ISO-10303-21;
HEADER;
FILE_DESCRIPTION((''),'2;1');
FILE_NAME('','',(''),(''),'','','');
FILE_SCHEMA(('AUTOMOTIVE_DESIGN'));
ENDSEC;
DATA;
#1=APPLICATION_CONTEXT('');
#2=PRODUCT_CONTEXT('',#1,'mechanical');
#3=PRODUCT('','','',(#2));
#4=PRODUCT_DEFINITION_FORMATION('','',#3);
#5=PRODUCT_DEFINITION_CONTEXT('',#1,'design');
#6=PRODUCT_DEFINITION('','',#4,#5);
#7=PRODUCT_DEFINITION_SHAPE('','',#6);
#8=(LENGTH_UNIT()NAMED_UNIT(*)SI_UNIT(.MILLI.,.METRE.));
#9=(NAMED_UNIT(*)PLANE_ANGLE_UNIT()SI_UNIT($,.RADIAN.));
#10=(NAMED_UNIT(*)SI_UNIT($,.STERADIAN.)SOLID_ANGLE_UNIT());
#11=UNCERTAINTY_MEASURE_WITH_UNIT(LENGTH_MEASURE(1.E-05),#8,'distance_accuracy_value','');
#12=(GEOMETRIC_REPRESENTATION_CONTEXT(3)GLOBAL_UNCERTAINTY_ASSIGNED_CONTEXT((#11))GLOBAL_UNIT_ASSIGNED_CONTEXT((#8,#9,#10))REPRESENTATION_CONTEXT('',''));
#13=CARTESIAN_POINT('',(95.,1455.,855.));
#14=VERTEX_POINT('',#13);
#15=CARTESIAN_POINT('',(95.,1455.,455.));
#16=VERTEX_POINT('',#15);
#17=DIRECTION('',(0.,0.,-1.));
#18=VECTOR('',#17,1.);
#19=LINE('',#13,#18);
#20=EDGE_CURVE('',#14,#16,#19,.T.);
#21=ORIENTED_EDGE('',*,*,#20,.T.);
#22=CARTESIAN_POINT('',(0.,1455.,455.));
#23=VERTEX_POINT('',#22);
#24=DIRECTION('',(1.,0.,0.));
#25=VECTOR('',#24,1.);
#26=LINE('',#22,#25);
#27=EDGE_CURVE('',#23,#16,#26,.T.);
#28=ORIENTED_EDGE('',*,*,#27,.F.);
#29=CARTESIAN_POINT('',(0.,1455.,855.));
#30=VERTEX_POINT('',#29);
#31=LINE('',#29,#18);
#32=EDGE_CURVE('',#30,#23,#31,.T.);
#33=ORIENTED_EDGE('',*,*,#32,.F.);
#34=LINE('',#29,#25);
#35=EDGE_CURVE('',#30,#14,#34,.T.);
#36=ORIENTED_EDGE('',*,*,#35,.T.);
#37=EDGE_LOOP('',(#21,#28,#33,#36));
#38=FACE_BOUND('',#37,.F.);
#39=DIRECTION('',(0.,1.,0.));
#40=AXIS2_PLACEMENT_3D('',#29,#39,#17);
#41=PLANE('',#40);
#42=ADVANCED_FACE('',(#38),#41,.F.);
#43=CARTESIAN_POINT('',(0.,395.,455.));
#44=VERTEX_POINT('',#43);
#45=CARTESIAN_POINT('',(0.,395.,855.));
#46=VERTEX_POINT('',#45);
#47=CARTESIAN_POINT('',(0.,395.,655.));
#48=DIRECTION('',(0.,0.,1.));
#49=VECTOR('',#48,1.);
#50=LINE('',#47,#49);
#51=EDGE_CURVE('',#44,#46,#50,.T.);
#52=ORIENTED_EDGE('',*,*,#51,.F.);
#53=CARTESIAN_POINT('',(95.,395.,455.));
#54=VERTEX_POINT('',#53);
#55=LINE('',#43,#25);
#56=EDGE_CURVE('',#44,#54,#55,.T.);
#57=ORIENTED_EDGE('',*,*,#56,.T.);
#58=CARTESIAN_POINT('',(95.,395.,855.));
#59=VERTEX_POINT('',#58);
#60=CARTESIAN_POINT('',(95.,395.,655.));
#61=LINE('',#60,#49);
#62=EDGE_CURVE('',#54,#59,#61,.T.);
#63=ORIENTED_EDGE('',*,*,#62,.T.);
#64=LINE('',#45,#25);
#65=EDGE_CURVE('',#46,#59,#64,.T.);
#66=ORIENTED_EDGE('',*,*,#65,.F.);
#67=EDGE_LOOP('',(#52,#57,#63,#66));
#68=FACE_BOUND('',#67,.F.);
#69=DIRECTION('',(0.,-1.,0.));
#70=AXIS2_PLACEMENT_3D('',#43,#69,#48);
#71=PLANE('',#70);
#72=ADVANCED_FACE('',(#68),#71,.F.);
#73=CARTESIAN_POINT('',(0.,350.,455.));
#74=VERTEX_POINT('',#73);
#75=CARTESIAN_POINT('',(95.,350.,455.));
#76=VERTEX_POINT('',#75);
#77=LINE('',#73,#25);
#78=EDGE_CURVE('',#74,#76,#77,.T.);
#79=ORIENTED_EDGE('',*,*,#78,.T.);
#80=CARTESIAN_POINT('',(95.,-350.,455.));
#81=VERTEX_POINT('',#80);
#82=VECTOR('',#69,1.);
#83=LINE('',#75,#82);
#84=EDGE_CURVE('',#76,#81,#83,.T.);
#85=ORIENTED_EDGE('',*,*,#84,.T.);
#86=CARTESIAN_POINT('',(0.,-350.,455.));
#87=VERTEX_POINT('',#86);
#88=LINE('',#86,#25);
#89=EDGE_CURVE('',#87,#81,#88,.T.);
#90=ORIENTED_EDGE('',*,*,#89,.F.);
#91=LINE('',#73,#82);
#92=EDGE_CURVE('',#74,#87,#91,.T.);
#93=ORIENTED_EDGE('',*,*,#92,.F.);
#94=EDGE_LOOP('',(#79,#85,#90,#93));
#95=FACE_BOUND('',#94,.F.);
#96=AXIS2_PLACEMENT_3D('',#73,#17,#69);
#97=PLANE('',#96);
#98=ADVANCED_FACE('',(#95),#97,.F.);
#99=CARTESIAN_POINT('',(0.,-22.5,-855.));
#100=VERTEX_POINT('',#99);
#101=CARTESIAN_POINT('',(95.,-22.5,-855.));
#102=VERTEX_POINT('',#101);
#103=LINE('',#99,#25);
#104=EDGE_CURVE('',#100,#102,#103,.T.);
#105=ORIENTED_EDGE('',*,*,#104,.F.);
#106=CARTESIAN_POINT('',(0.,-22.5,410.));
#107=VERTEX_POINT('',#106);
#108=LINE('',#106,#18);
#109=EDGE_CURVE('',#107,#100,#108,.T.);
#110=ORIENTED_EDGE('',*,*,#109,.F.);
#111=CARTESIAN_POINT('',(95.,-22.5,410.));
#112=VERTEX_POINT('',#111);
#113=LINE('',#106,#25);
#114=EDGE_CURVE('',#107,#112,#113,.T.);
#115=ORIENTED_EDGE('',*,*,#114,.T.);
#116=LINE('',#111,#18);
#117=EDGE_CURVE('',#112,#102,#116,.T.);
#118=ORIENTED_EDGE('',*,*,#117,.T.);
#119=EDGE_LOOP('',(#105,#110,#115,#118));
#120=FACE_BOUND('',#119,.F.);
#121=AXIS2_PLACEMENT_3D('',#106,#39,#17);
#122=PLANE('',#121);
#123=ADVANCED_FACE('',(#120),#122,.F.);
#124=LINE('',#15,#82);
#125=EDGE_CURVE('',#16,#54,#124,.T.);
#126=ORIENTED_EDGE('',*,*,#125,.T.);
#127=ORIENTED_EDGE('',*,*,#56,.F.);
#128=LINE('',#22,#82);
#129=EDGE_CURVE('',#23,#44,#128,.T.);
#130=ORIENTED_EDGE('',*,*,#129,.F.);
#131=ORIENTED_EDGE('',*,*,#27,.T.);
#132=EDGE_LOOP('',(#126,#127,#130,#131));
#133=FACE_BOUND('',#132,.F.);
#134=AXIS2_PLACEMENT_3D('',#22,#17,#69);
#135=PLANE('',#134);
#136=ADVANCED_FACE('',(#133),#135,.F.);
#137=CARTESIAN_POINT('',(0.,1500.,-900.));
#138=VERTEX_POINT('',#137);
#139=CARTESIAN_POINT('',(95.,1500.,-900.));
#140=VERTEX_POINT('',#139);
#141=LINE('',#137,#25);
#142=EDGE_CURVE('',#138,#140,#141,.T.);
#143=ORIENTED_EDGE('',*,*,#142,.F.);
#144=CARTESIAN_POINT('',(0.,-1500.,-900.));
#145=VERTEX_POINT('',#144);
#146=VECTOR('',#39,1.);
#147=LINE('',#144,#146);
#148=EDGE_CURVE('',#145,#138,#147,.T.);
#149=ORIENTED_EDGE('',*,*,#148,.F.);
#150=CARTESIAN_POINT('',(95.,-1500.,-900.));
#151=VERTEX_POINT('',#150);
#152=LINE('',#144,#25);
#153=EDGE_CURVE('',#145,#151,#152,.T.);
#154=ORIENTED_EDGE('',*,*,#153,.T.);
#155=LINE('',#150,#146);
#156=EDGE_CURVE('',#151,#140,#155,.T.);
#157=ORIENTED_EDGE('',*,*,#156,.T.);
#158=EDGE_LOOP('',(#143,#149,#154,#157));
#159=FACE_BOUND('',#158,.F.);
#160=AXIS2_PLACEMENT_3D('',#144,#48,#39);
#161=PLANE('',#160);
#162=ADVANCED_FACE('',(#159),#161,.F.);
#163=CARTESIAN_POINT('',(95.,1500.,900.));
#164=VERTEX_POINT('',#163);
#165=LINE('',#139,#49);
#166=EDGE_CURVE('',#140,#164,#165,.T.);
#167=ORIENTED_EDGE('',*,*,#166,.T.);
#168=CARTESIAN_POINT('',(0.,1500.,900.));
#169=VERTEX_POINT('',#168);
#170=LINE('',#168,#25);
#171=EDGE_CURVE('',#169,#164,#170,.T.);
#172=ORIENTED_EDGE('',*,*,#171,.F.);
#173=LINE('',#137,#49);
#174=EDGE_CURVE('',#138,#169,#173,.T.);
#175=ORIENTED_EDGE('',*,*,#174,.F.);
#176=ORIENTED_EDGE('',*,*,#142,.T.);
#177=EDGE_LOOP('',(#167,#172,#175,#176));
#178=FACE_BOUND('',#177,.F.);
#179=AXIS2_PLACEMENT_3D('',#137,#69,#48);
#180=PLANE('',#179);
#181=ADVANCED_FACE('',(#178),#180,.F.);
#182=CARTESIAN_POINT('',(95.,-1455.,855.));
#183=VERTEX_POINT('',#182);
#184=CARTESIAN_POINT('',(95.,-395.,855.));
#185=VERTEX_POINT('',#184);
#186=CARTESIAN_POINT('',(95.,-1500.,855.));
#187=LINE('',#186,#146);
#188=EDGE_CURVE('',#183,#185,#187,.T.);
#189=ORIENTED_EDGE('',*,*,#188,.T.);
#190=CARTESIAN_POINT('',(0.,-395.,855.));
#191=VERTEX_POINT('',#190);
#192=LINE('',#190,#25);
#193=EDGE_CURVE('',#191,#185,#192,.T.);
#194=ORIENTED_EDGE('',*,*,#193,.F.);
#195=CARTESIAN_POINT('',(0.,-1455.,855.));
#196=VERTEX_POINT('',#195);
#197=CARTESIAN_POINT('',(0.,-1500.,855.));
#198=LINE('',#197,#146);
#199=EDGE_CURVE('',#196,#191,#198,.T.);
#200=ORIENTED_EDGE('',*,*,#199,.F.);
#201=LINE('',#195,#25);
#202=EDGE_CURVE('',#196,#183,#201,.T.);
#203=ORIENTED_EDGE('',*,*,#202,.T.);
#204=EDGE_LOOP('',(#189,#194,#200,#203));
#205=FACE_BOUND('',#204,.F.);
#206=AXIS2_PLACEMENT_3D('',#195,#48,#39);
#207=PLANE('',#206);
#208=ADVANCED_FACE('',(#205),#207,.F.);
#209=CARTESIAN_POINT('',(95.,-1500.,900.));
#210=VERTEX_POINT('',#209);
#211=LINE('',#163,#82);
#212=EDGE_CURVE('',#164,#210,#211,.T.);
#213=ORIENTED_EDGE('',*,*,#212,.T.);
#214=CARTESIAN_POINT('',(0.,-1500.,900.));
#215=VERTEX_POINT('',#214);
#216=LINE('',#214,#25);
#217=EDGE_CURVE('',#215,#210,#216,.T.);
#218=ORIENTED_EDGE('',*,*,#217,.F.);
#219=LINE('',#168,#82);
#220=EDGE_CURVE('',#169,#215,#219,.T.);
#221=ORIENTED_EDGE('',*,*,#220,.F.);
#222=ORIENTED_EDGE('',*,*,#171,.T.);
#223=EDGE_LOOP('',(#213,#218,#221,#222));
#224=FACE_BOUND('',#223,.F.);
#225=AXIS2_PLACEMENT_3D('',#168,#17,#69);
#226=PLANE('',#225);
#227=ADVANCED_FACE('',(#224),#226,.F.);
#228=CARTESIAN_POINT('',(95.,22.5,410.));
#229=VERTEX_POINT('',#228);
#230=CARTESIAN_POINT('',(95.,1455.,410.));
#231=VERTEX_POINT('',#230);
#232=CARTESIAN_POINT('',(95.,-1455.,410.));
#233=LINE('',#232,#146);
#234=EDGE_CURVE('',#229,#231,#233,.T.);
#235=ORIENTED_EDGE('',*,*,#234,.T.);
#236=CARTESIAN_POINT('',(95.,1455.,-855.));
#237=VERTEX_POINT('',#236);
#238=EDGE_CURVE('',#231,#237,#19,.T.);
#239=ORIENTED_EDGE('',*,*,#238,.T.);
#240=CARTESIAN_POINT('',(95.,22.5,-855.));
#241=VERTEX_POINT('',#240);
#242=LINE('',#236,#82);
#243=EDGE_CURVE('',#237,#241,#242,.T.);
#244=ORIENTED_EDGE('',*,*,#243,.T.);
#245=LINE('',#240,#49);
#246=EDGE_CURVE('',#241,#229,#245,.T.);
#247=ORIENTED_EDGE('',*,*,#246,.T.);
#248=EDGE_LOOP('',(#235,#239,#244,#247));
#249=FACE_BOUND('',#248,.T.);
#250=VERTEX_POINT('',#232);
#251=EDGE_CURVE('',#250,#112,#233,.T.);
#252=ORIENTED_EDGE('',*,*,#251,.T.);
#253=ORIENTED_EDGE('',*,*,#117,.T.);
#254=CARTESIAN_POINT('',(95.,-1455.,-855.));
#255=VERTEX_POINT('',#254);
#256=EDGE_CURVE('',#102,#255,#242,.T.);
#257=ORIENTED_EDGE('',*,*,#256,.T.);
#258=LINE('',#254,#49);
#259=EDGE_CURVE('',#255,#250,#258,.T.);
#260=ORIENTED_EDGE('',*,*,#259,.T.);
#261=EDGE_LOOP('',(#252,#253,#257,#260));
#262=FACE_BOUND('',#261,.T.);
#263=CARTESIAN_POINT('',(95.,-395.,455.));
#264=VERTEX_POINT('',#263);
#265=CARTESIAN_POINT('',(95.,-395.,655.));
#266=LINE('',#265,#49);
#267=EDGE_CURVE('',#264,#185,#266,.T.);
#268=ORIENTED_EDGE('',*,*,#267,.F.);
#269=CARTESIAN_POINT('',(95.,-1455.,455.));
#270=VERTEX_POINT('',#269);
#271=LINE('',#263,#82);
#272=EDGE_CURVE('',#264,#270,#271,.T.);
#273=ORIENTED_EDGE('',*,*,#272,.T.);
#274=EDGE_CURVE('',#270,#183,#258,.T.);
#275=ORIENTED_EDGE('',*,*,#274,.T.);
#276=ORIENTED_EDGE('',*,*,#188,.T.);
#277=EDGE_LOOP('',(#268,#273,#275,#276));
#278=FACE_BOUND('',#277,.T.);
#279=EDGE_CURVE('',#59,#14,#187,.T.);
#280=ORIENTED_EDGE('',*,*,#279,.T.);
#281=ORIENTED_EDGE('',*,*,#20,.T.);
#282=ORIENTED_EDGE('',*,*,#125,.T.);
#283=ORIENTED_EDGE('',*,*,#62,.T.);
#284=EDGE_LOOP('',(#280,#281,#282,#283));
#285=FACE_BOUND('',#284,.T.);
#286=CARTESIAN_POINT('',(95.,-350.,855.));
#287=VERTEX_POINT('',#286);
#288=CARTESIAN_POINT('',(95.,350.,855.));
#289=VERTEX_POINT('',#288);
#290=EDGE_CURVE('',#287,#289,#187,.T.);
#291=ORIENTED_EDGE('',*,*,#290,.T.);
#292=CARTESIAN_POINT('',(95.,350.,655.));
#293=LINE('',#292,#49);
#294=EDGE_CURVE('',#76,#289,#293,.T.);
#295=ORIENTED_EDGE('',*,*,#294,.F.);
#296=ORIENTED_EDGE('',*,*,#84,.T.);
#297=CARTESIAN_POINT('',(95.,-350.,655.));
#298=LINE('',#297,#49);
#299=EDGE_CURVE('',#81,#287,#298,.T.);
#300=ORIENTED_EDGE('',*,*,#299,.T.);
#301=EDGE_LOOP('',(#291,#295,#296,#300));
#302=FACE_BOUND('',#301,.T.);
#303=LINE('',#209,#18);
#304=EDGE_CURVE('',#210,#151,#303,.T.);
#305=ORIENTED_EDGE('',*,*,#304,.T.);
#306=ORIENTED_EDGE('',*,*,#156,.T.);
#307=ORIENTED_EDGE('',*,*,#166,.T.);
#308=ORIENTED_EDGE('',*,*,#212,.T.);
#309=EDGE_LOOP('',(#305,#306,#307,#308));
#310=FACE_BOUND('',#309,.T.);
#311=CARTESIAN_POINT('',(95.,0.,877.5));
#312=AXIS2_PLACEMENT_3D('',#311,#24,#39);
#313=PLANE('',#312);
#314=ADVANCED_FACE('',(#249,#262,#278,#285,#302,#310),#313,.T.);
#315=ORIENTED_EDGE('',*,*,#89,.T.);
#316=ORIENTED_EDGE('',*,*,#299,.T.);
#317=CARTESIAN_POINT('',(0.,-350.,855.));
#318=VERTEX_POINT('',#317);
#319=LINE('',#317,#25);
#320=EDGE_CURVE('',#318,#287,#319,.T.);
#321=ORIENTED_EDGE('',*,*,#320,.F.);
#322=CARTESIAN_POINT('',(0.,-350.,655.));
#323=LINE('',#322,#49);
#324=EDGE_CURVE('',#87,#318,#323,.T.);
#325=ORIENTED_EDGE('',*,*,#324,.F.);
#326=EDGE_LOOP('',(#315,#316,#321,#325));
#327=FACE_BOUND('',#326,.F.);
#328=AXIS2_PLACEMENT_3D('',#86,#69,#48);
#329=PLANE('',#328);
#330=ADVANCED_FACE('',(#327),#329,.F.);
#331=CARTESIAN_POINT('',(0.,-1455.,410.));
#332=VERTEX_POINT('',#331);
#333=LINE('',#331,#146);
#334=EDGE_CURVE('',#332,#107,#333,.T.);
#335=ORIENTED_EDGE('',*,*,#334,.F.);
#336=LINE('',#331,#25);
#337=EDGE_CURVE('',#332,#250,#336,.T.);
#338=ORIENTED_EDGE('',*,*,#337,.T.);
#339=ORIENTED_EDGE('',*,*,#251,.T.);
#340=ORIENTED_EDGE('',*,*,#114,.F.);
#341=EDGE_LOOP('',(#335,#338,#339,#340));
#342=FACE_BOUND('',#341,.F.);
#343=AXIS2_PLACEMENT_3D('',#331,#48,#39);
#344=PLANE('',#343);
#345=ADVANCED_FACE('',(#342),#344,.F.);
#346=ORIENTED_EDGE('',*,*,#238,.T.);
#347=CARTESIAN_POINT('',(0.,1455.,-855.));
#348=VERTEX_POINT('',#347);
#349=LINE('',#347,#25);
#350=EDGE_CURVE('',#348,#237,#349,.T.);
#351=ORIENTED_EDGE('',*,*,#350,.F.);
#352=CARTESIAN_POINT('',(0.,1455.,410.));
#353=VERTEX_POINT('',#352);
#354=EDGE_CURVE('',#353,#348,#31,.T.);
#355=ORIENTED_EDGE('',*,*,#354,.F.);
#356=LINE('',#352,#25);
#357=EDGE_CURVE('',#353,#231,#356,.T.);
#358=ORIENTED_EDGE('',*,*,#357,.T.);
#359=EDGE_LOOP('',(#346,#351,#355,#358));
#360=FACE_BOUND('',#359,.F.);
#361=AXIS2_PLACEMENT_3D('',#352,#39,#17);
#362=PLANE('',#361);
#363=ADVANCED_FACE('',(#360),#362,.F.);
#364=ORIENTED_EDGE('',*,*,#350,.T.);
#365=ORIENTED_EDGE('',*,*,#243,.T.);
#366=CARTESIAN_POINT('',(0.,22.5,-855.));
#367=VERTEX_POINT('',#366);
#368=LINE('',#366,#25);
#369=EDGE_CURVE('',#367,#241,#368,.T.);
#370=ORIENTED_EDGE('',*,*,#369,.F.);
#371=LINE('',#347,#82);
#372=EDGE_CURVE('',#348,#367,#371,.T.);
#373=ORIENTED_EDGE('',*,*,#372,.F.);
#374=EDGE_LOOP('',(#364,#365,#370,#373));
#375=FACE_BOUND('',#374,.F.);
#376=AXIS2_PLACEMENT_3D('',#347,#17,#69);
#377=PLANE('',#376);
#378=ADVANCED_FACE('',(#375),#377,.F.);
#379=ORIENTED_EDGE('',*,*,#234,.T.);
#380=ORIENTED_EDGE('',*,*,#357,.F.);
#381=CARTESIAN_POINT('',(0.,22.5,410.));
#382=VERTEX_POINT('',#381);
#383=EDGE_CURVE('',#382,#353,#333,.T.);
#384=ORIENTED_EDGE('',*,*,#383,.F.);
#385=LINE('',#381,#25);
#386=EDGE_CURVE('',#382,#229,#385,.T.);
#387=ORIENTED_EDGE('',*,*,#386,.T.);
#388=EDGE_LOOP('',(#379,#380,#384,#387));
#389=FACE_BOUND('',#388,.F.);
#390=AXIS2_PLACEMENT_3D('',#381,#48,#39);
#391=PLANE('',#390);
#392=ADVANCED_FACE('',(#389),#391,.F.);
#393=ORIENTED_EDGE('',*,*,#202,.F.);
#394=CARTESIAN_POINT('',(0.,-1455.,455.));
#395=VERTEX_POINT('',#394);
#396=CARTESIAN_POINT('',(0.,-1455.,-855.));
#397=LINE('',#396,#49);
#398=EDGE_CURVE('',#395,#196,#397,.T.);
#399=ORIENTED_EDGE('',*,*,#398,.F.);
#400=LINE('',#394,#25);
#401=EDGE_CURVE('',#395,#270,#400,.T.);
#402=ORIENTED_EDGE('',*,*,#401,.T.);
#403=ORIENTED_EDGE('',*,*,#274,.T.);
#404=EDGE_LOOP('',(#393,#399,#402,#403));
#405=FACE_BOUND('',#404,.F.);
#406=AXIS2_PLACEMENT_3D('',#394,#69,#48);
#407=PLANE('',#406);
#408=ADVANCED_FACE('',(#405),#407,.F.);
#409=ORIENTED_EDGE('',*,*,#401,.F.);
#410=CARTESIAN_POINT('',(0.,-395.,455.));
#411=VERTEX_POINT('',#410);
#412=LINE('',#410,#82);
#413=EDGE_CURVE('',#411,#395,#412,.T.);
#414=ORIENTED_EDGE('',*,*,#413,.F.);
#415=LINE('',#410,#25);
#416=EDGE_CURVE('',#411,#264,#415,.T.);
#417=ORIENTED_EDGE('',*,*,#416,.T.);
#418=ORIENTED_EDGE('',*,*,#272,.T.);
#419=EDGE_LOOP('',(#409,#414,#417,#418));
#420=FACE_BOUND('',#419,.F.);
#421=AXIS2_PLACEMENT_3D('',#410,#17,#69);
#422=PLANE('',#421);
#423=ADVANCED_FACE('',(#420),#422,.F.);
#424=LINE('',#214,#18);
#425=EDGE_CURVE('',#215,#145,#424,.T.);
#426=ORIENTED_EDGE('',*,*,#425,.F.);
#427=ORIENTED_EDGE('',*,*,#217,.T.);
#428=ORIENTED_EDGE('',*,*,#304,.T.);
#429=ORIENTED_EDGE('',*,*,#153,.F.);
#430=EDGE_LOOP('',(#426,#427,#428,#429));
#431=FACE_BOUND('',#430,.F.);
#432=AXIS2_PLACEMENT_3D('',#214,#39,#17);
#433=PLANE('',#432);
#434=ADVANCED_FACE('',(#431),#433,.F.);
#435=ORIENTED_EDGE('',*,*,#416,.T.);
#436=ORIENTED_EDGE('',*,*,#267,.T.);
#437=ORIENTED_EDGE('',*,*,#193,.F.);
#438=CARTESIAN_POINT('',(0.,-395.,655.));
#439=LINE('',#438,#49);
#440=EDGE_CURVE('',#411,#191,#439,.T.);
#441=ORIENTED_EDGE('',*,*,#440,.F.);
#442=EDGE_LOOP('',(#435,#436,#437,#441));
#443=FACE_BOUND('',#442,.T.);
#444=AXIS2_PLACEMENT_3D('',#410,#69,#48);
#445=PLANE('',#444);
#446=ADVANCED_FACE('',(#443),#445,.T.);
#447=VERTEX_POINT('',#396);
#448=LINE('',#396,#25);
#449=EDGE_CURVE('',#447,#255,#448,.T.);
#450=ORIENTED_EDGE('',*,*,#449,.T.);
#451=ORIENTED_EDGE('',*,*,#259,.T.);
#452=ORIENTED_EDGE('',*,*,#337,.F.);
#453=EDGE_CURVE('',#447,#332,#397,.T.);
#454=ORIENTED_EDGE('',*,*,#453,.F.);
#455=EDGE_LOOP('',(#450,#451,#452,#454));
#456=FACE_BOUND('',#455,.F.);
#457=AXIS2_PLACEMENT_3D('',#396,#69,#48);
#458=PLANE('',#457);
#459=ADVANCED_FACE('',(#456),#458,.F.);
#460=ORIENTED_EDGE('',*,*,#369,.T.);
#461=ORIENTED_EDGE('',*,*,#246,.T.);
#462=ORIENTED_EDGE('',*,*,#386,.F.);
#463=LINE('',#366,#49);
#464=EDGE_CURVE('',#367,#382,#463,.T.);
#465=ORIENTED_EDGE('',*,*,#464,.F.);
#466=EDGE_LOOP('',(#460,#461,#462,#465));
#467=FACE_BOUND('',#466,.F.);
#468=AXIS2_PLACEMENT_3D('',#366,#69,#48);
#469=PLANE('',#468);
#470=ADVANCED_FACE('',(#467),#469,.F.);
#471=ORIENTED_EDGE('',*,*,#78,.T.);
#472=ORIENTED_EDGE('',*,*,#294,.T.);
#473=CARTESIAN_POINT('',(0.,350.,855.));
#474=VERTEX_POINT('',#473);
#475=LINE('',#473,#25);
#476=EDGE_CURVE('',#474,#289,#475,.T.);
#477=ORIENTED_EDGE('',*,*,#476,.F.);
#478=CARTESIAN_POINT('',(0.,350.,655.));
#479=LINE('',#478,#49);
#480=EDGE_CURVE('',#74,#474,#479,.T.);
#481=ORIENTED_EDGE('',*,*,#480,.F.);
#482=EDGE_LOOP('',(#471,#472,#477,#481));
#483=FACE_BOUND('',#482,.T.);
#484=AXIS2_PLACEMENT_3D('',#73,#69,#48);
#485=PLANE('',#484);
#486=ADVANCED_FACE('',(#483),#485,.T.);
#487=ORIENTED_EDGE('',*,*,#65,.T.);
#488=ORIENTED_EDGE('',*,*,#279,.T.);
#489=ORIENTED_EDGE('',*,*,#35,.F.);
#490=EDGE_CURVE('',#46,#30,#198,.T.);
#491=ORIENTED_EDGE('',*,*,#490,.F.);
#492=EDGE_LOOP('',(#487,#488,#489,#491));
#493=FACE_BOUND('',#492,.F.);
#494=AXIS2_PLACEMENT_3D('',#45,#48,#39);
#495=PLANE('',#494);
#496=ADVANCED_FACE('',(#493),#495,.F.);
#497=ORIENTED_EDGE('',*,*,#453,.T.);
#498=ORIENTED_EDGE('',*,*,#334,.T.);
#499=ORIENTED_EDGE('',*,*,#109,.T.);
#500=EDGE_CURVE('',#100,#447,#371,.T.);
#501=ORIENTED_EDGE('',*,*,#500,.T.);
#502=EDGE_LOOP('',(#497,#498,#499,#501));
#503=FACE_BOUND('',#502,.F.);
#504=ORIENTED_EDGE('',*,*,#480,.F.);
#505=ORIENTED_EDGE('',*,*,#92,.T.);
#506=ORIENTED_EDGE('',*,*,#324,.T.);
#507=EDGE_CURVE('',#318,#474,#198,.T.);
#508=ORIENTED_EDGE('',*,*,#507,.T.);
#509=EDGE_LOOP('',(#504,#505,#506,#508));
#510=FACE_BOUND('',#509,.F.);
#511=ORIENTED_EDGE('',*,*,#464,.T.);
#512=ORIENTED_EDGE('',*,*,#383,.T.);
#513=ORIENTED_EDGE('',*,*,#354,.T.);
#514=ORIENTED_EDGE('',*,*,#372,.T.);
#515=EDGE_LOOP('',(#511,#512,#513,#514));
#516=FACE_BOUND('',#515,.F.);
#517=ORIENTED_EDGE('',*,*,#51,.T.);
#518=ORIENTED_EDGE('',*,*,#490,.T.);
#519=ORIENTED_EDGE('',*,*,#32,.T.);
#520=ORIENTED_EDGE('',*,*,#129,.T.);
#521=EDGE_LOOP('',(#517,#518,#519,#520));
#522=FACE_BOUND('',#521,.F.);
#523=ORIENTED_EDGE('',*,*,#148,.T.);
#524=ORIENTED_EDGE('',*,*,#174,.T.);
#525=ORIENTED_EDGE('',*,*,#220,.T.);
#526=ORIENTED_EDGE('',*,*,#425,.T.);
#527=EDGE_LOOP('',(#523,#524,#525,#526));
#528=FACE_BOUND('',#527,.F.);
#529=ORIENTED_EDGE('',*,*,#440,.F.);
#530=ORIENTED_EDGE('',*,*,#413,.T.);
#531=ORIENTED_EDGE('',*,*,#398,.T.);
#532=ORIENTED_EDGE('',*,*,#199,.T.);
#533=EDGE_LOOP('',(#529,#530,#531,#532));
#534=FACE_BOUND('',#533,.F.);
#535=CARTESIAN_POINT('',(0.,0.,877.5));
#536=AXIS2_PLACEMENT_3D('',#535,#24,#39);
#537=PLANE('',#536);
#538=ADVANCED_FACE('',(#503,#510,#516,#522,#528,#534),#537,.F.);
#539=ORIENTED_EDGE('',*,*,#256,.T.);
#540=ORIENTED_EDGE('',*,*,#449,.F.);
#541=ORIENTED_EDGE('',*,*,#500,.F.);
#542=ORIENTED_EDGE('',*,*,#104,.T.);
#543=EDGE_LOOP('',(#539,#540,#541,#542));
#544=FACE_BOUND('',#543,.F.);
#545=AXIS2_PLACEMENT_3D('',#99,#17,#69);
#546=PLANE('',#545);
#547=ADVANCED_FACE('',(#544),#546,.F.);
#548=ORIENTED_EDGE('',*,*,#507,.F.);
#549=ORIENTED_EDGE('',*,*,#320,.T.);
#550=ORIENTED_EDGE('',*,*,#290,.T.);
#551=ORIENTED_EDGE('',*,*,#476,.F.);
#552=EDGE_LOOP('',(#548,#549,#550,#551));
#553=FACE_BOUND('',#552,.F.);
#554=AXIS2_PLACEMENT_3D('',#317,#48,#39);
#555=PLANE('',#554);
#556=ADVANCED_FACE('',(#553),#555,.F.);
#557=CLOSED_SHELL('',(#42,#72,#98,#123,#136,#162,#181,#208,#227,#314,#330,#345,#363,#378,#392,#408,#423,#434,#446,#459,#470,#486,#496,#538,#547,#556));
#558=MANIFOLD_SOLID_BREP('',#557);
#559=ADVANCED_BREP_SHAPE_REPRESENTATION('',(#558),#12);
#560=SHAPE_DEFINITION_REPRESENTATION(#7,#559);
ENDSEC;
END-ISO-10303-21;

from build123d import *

# Parameters (mm, degrees)
F0_W     = 45
F0_H     = 400
F1_DEPTH = 95


# Not quite as in the source:
# - a feature names something its author has since deleted; it is built from what else it names


with BuildPart() as f1:
    # F0 (on Right) → F1 (new body)
    with BuildSketch(Plane.YZ):
        Polygon((1500, 900), (-1500, 900), (-1500, 855), (-1455, 855), (-395, 855), (-350, 855), (-117.5, 855), (22.5, 855), (350, 855), (395, 855), (1455, 855), (1500, 855), align=None)
        Polygon((-1455, 855), (-1500, 855), (-1500, -855), (-1455, -855), (-1455, 410), (-1455, 455), align=None)
        Polygon((1500, -855), (1500, 855), (1455, 855), (1455, 455), (1455, 410), (1455, 22.5), (1455, -22.5), (1455, -855), align=None)
        Polygon((-1455, -855), (-1500, -855), (-1500, -900), (1500, -900), (1500, -855), (1455, -855), (117.5, -855), (22.5, -855), (-22.5, -855), align=None)
        with Locations((372.5, 655)):
            Rectangle(F0_W, F0_H)
        with Locations((-372.5, 655)):
            Rectangle(F0_W, F0_H)
        Polygon((-395, 455), (-1455, 455), (-1455, 410), (-22.5, 410), (22.5, 410), (1455, 410), (1455, 455), (395, 455), (350, 455), (-350, 455), align=None)
        Polygon((-22.5, 410), (-22.5, -855), (22.5, -855), (22.5, -22.5), (22.5, 22.5), (22.5, 410), align=None)
    extrude(amount=F1_DEPTH)


solid = f1.part
